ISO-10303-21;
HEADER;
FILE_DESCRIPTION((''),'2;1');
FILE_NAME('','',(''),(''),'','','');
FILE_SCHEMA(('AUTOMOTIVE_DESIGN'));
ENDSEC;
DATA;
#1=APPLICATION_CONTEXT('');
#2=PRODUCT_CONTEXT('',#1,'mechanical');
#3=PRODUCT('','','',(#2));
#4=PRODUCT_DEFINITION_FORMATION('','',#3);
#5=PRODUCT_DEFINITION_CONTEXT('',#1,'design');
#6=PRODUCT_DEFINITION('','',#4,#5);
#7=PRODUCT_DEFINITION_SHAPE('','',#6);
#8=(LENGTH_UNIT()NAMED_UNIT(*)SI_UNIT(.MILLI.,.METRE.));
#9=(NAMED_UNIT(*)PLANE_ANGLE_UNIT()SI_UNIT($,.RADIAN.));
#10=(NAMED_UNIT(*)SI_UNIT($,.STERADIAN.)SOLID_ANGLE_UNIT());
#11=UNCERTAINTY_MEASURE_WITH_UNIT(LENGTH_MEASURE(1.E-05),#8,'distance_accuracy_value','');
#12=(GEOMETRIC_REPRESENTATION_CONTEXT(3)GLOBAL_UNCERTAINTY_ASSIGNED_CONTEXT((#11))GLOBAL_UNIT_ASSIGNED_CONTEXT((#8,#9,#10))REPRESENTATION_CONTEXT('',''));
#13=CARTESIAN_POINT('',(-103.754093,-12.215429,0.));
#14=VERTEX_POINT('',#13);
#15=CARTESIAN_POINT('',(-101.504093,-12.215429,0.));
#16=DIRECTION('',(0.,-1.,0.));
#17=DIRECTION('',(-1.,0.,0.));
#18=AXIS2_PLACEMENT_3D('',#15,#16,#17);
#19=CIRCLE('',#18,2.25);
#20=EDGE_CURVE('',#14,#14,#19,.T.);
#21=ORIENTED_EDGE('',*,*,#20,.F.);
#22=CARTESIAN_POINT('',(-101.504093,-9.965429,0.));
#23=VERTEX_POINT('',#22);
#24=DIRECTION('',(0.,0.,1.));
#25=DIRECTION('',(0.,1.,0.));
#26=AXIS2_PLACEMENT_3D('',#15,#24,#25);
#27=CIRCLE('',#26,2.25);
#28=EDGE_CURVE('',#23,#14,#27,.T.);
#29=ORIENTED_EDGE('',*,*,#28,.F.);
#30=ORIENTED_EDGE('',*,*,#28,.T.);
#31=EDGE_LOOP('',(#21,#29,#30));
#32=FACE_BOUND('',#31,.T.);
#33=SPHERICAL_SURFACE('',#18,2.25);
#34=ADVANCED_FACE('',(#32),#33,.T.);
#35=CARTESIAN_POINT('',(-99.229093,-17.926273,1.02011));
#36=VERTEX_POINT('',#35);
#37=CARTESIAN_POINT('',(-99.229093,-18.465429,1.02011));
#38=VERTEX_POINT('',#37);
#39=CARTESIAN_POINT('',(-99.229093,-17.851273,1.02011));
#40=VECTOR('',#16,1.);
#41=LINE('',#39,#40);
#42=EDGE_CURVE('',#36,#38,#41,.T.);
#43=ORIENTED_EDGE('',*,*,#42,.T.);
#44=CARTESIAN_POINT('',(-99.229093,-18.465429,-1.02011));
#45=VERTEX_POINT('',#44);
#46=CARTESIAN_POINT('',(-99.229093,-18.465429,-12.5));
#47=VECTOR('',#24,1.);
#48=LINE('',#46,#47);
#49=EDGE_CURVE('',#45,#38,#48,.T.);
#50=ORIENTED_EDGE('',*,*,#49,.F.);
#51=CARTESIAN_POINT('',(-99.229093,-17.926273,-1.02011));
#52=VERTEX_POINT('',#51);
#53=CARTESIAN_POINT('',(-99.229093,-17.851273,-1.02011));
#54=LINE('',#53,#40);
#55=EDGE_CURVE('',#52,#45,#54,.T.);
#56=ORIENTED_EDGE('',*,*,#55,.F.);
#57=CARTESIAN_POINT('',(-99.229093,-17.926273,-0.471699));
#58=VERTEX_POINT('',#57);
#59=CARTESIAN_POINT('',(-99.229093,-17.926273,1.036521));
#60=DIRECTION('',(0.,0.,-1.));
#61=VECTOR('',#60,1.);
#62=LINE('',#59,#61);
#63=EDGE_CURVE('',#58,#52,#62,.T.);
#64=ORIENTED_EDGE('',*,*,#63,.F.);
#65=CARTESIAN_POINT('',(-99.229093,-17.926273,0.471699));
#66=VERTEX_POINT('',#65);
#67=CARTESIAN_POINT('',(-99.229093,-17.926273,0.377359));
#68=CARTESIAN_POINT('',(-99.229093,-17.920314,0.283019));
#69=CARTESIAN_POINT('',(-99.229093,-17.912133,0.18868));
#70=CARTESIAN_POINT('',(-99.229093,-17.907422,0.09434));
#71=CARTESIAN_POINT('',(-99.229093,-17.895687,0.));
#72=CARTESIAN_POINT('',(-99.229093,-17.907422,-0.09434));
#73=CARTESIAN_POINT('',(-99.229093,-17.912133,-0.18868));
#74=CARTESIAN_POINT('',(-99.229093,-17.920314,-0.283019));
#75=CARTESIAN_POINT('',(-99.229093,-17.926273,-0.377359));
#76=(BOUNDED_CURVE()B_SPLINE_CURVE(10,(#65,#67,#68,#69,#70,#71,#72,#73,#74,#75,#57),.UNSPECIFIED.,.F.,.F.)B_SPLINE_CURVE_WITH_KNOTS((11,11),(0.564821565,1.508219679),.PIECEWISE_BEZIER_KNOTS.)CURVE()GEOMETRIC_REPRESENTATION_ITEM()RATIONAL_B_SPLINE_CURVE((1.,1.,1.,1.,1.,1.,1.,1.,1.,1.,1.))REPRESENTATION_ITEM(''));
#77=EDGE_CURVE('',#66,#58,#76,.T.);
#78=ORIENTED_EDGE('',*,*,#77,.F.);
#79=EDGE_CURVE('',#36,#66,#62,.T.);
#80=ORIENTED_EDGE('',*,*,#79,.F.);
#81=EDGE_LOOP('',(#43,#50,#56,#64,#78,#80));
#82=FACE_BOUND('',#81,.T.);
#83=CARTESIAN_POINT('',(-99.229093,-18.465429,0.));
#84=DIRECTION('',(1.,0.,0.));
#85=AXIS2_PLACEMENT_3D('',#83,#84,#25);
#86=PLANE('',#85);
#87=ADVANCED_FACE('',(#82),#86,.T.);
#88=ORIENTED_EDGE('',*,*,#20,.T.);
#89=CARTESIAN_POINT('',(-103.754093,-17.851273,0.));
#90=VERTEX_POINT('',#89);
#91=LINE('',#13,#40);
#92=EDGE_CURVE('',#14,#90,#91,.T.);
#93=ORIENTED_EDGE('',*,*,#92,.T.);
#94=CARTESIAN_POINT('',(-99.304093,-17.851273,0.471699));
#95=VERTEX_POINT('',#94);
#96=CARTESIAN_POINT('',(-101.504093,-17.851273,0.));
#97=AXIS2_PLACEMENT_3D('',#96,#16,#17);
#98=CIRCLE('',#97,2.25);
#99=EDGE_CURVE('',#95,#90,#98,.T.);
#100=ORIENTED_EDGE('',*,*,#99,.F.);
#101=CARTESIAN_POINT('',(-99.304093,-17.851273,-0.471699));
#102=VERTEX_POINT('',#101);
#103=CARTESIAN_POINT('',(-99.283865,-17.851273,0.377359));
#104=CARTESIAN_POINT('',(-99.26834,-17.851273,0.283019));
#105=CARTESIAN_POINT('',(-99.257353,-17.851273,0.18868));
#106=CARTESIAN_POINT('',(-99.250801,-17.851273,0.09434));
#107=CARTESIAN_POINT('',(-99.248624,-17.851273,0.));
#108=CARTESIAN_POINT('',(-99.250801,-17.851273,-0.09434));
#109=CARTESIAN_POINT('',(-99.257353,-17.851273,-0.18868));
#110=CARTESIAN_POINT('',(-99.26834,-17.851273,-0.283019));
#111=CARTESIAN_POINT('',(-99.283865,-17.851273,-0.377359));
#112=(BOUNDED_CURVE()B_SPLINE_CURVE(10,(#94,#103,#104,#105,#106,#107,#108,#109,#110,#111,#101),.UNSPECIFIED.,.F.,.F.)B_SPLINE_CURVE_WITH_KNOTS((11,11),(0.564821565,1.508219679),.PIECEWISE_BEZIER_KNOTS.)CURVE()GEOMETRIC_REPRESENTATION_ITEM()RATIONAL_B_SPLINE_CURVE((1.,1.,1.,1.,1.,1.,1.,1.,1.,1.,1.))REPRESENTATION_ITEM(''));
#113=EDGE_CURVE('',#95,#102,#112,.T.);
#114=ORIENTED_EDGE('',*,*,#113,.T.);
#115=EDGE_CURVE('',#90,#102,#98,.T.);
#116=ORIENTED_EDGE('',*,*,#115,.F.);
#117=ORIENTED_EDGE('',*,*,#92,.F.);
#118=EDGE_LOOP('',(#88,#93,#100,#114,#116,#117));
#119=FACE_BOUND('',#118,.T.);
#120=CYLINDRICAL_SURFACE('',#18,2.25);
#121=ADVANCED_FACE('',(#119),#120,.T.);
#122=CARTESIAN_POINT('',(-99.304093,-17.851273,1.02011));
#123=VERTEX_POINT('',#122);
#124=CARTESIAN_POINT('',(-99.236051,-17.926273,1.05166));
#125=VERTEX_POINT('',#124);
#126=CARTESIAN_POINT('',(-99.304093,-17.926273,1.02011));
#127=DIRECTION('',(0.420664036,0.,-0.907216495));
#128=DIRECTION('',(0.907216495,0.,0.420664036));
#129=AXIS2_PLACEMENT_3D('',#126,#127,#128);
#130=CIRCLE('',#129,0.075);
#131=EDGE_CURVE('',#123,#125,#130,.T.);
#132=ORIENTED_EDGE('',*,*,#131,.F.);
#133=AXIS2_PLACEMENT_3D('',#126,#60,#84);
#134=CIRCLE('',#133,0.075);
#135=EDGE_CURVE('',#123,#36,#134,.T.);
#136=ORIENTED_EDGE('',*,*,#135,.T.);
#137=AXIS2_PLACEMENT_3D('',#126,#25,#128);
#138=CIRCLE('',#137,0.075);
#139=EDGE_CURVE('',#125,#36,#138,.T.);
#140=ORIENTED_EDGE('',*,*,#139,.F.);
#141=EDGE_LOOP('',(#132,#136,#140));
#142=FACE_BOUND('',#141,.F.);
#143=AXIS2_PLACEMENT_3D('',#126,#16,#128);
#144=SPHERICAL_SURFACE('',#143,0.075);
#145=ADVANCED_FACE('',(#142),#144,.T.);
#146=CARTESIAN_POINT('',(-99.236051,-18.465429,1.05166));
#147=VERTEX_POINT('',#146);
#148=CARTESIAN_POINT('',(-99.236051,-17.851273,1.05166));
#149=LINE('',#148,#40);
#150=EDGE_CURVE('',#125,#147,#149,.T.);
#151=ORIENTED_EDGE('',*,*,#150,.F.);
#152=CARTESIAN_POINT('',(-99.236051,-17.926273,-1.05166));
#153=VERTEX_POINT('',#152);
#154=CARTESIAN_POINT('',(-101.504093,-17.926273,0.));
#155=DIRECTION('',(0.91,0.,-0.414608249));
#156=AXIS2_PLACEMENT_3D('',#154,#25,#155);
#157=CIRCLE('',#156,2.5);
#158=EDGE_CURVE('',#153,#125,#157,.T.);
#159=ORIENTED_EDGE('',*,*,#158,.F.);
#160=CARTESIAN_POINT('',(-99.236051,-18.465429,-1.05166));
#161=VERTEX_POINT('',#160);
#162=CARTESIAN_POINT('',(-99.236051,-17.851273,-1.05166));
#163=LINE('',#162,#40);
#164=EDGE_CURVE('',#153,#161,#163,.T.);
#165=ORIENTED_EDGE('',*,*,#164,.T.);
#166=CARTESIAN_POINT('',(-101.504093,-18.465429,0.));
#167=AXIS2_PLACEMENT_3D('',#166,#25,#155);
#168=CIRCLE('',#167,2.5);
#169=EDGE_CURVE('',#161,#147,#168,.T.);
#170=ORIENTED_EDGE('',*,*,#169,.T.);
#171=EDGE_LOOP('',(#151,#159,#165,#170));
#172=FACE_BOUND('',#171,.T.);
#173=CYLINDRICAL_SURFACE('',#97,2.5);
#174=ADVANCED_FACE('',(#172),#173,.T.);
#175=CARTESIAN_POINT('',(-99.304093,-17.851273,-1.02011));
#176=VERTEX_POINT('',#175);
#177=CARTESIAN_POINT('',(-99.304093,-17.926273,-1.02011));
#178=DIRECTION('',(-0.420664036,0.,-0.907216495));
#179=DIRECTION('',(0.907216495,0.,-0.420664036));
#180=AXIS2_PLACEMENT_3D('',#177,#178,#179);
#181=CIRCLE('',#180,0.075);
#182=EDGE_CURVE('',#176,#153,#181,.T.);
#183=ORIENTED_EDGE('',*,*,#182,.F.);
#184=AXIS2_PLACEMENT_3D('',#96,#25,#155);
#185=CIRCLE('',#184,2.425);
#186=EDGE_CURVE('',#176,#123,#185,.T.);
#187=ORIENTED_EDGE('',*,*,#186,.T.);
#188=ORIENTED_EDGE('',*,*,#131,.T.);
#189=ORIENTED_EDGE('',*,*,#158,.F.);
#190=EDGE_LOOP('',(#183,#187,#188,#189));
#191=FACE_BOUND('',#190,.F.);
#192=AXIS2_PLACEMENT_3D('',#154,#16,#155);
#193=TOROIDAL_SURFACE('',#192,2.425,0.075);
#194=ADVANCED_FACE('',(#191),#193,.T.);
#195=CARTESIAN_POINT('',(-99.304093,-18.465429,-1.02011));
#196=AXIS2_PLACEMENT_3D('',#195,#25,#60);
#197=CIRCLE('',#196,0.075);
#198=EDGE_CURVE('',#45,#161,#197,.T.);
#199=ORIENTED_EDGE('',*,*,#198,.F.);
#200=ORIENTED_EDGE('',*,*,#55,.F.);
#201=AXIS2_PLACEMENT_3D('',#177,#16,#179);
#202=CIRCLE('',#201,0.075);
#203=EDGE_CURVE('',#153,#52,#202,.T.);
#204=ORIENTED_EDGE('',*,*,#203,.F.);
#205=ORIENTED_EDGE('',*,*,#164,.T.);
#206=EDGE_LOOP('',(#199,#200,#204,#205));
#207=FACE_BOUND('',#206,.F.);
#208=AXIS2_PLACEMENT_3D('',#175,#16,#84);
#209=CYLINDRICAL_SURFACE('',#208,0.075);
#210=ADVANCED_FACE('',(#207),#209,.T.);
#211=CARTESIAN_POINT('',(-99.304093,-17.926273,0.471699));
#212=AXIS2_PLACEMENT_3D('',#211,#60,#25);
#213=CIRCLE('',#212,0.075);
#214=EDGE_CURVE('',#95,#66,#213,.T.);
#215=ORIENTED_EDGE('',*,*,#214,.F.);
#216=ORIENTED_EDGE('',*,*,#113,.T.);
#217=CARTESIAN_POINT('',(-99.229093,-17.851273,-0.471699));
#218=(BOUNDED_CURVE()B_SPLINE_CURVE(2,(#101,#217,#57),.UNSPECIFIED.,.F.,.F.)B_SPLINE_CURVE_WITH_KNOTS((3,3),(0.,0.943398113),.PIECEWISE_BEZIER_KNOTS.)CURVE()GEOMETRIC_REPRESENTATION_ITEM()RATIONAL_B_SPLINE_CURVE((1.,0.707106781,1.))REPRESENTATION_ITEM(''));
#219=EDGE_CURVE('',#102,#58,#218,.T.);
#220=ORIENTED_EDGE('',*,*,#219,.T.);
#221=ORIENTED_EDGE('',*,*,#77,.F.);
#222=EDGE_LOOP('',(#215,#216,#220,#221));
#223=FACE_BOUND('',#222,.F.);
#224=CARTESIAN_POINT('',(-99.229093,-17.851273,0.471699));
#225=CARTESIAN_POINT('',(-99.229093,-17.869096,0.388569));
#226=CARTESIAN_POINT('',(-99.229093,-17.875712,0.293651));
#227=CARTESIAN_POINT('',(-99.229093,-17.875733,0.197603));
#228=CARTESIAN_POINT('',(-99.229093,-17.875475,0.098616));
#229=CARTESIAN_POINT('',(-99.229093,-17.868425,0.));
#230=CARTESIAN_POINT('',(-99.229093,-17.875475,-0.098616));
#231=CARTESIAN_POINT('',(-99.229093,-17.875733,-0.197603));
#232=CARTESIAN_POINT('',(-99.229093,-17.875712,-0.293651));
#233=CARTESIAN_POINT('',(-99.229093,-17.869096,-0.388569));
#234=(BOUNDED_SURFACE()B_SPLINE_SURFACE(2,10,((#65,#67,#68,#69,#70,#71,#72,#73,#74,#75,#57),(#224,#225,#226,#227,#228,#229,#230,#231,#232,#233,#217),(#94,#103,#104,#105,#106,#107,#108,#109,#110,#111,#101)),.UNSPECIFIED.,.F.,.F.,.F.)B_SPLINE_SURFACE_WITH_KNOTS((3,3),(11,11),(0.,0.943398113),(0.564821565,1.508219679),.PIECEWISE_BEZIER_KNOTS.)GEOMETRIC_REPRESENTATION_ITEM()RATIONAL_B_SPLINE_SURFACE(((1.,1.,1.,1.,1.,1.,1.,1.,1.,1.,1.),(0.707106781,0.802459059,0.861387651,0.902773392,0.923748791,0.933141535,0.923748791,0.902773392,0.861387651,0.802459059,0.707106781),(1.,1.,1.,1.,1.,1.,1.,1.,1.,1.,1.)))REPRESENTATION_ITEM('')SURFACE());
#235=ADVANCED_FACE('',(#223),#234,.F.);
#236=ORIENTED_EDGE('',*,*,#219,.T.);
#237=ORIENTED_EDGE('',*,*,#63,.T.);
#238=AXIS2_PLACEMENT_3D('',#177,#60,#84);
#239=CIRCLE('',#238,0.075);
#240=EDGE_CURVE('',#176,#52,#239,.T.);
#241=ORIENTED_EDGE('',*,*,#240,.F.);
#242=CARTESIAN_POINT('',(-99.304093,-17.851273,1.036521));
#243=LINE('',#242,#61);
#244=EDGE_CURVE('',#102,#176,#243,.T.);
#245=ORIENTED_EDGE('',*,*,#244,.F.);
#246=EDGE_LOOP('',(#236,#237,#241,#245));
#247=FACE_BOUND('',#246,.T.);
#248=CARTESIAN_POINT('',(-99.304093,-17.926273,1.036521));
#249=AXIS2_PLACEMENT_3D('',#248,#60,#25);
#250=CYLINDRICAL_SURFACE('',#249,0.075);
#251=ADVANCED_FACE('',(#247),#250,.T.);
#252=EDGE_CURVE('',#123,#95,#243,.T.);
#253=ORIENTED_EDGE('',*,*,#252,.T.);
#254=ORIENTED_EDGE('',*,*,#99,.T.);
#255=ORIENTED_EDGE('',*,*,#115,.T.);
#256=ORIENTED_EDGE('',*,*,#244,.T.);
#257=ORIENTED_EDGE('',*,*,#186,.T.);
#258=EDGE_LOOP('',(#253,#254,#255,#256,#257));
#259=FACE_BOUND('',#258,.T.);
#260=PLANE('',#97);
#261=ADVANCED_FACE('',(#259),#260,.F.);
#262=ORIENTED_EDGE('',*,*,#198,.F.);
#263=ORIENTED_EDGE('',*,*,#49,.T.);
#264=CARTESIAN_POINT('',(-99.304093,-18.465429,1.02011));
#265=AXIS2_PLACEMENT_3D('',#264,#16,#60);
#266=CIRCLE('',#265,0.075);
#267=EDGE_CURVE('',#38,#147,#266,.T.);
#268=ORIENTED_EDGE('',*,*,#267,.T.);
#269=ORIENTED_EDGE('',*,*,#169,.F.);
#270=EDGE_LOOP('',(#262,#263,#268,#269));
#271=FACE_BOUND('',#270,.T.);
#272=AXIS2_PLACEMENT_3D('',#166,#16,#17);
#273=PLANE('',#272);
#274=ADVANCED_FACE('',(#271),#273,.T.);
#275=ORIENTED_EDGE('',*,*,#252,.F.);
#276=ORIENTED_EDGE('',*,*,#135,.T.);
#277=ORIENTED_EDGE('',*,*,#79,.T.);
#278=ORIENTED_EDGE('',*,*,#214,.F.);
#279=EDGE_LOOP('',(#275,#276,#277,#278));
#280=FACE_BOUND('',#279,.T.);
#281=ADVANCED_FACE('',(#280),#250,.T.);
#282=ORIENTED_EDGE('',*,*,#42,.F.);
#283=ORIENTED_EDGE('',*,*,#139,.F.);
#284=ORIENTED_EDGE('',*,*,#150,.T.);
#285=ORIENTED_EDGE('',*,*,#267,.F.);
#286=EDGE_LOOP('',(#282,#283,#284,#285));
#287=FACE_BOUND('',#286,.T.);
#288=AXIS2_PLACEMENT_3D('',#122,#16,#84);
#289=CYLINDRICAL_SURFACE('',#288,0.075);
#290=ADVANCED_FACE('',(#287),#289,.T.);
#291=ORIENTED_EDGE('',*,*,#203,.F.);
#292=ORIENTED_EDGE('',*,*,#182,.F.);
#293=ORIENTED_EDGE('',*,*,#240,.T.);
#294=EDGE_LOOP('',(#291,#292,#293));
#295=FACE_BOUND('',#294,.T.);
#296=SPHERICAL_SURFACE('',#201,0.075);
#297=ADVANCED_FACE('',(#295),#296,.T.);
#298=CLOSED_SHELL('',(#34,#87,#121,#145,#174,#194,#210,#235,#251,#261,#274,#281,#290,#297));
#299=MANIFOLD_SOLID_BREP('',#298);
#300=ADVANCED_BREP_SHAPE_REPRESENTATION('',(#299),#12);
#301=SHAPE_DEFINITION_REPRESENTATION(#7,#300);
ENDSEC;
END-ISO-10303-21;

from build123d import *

# Parameters (mm, degrees)
F2_W     = 0.225
F2_H     = 0.6141559725
F3_DEPTH = 12.5
F4_R     = 0.075


with BuildPart() as f1:
    # F0 (on Top) → F1 (revolve)
    with BuildSketch(Plane.XY):
        with BuildLine():
            Line((-101.5040925145, -14.4654285704), (-101.5040925145, -9.9654285704))
            ThreePointArc((-101.5040925145, -9.9654285704), (-103.0950827722, -10.6244383127), (-103.7540925145, -12.2154285704))
            ThreePointArc((-103.7540925145, -12.2154285704), (-103.0950827722, -13.8064188281), (-101.5040925145, -14.4654285704))
        make_face()
        with BuildLine():
            Line((-101.5040925145, -17.8512725979), (-101.5040925145, -14.4654285704))
            ThreePointArc((-101.5040925145, -14.4654285704), (-103.0950827722, -13.8064188281), (-103.7540925145, -12.2154285704))
            Line((-103.7540925145, -12.2154285704), (-103.7540925145, -17.8512725979))
            Line((-103.7540925145, -17.8512725979), (-101.5040925145, -17.8512725979))
        make_face()
        Polygon((-101.5040925145, -18.4654285704), (-101.5040925145, -17.8512725979), (-103.7540925145, -17.8512725979), (-104.0040925145, -17.8512725979), (-104.0040925145, -18.4654285704), align=None)
    revolve(axis=Axis((-101.5040925145, -14.2154285704, 0), (0, -1, 0)))

    # F2 (on Top) → F3 (cut, symmetric)
    with BuildSketch(Plane.XY):
        with Locations((-99.1165925145, -18.1583505842)):
            Rectangle(F2_W, F2_H)
    extrude(amount=F3_DEPTH, both=True, mode=Mode.SUBTRACT)

    # F4
    f4_edges = [f1.edges().sort_by_distance(p)[0] for p in [
        (-104.004093, -17.851273, 0),
        (-99.229093, -17.851273, 0),
        (-99.229093, -18.158351, 1.036521),
        (-99.229093, -18.158351, -1.036521),
    ]]
    fillet(f4_edges, radius=F4_R)


solid = f1.part
